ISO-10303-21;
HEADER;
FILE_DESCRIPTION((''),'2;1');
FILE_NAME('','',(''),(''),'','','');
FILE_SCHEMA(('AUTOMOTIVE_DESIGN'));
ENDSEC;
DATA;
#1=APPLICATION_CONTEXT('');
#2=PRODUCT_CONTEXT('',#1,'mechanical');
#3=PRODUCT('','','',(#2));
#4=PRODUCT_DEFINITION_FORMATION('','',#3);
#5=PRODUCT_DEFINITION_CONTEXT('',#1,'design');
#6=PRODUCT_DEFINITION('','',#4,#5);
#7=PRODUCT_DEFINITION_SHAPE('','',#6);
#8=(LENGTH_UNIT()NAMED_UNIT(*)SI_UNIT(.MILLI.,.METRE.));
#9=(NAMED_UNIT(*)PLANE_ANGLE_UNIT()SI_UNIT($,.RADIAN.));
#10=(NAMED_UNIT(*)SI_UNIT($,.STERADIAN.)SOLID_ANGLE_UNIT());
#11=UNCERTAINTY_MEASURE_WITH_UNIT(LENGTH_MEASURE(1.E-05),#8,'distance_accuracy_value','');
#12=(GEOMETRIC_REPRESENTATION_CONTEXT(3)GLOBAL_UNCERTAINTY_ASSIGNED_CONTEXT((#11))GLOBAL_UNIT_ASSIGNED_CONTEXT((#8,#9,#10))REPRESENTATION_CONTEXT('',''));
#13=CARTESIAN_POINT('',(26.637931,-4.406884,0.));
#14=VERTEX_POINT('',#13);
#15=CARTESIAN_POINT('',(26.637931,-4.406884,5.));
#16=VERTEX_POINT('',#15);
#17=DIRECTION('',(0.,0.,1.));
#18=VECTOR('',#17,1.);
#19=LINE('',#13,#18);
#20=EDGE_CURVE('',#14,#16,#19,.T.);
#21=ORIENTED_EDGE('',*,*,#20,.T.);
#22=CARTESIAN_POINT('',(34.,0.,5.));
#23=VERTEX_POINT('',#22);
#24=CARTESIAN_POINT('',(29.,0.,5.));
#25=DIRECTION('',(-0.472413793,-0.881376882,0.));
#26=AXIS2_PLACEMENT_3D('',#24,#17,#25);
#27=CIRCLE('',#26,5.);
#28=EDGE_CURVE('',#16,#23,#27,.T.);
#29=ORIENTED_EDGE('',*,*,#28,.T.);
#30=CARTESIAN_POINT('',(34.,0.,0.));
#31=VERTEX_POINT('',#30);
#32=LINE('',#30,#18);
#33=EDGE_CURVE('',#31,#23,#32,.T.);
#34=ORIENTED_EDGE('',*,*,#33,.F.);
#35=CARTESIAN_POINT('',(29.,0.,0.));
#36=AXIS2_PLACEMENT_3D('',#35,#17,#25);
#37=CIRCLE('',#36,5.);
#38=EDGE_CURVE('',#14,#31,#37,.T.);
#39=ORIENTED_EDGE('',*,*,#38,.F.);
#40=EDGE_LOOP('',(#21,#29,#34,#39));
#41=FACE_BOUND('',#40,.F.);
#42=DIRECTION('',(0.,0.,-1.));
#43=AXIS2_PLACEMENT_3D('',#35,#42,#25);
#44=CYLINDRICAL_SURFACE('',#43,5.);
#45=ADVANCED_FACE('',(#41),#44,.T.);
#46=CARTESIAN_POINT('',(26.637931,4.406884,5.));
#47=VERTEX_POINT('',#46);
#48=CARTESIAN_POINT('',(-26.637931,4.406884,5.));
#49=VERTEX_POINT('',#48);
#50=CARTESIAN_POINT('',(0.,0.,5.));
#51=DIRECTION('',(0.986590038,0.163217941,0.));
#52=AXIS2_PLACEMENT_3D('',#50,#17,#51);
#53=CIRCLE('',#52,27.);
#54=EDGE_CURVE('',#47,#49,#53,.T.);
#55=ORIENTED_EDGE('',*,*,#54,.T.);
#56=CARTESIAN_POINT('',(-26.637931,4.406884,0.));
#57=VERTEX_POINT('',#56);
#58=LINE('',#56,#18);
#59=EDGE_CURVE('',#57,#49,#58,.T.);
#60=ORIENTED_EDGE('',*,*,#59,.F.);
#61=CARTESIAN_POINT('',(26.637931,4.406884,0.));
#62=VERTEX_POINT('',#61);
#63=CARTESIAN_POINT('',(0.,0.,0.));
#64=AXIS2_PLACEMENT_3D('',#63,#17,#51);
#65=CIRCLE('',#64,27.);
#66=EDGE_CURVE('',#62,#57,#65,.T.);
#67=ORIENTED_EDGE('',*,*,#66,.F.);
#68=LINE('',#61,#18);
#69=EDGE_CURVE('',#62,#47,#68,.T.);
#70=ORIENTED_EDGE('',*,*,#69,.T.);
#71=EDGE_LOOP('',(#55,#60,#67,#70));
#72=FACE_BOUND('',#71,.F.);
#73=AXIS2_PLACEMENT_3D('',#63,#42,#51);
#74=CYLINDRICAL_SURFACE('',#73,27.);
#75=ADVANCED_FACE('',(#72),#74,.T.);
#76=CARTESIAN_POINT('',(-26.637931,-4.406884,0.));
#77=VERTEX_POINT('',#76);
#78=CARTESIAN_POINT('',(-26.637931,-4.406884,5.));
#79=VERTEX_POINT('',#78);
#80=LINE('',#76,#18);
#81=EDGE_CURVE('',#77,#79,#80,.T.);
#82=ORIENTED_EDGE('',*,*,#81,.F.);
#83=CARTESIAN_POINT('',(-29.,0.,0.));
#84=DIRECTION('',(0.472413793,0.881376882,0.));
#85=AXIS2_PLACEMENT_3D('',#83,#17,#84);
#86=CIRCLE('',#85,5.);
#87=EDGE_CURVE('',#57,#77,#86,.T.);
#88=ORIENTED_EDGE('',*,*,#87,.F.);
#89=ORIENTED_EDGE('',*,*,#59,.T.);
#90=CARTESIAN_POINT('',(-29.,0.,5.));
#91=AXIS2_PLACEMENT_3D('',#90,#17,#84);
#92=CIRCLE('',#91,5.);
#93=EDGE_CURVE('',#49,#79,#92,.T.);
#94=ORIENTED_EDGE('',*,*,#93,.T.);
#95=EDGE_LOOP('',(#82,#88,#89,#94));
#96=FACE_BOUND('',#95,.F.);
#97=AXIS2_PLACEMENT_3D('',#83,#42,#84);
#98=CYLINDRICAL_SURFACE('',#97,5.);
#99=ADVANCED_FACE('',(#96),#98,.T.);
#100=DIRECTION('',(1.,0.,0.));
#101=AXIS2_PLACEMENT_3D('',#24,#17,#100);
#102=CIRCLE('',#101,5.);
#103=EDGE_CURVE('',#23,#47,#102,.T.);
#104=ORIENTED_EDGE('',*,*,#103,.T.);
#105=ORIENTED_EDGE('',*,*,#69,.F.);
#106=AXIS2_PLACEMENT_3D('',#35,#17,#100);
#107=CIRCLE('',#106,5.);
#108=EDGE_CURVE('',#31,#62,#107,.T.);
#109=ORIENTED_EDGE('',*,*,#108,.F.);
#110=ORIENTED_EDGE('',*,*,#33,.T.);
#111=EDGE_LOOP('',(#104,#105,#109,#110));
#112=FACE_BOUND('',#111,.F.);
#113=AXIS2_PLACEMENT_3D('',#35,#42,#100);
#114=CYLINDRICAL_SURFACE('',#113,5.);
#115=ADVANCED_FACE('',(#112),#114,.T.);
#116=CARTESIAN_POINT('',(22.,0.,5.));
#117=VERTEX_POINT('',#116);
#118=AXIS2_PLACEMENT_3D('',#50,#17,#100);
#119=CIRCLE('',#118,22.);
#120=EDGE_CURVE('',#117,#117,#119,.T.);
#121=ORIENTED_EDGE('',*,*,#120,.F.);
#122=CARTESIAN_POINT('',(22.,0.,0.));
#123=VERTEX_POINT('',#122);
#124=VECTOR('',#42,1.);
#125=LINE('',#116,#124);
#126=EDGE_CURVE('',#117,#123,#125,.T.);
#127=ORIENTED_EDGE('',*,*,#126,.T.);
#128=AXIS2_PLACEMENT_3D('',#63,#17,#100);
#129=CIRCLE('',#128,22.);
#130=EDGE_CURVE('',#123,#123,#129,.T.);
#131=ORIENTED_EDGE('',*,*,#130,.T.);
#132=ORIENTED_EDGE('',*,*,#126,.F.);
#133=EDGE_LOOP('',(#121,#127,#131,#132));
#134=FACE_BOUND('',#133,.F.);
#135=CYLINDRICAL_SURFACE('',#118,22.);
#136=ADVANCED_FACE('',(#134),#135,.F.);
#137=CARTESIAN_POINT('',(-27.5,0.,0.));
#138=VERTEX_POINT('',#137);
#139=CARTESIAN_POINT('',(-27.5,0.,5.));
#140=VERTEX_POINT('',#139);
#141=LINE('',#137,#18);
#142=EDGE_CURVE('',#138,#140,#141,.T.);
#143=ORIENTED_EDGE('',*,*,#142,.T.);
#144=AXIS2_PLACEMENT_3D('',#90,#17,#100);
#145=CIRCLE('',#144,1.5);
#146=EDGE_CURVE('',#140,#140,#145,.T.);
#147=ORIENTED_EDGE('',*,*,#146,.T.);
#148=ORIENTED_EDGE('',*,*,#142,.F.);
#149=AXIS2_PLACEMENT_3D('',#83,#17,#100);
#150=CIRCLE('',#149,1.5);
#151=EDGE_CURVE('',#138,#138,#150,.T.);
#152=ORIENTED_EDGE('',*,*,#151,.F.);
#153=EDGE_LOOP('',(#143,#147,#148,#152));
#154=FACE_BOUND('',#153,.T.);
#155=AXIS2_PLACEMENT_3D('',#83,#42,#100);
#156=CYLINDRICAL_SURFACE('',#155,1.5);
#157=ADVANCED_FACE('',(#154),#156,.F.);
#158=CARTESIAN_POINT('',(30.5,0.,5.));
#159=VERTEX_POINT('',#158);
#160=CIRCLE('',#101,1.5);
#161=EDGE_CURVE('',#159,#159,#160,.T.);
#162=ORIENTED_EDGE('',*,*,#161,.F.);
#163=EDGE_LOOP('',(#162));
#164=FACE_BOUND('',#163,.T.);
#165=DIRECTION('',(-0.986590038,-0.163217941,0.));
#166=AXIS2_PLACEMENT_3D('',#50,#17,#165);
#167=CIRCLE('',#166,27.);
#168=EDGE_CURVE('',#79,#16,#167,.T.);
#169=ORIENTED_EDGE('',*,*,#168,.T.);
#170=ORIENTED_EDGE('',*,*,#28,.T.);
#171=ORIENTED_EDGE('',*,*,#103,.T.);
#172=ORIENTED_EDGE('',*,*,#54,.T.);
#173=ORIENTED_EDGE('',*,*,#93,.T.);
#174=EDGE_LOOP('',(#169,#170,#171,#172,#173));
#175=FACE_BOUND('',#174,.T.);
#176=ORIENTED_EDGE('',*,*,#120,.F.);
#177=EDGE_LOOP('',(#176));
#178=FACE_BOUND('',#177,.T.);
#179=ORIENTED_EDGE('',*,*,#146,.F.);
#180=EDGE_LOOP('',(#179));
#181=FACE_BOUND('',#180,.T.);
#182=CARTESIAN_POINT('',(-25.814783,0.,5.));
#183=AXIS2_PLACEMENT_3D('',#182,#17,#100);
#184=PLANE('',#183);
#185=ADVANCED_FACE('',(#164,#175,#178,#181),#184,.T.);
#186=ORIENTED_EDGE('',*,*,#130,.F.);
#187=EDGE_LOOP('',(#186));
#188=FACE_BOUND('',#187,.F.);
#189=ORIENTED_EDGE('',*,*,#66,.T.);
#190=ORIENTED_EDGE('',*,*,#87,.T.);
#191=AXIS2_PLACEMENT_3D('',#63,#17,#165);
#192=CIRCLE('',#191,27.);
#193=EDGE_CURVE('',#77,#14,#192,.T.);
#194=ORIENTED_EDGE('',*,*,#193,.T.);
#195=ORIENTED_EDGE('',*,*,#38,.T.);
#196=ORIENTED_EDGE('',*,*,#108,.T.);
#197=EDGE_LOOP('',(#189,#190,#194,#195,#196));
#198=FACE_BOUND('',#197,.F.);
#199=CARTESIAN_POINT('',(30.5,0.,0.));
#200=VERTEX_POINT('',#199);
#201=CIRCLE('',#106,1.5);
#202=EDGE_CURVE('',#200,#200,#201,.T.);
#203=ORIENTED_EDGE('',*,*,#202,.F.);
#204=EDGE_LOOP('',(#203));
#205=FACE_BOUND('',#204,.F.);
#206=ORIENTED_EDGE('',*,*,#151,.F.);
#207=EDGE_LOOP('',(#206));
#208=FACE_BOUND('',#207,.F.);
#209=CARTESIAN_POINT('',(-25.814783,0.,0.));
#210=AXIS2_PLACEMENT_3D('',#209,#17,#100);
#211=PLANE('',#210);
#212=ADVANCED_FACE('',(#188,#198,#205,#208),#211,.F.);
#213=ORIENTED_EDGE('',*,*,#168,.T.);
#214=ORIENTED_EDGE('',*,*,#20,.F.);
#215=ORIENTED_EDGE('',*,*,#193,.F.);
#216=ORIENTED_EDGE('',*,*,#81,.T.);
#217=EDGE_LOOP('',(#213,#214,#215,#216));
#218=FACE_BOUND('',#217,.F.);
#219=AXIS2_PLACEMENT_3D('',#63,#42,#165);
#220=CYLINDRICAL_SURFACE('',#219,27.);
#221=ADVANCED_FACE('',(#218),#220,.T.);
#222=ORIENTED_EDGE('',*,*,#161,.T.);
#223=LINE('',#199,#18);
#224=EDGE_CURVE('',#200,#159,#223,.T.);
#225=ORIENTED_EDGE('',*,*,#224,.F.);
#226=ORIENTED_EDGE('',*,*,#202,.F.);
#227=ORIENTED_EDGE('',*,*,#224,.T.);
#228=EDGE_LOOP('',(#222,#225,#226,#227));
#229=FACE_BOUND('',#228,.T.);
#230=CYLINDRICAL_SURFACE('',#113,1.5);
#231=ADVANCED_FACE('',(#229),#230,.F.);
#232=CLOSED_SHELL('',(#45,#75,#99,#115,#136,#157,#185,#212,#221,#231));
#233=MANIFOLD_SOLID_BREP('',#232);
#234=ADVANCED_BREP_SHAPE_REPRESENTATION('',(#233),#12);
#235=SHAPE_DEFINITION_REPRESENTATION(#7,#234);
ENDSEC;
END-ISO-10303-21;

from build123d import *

# Parameters (mm, degrees)
F0_R     = 1.5
F1_DEPTH = 5
F2_DEPTH = 5
F3_R     = 22
F4_DEPTH = 6


with BuildPart() as f1:
    # F0 (on Top) → F1 (new body)
    with BuildSketch(Plane.XY):
        with BuildLine():
            ThreePointArc((-26.6379310345, -4.4068844099), (-27, 0), (-26.6379310345, 4.4068844099))
            ThreePointArc((-26.6379310345, 4.4068844099), (-34, 0), (-26.6379310345, -4.4068844099))
        make_face()
        with Locations((-29, 0)):
            Circle(F0_R, mode=Mode.SUBTRACT)
    extrude(amount=F1_DEPTH)



with BuildPart() as f1b:
    # F0 (on Top) → F1, piece 2 (new body)
    with BuildSketch(Plane.XY):
        with BuildLine():
            ThreePointArc((26.6379310345, 4.4068844099), (26.9093305187, 2.21086658), (27, 0))
            ThreePointArc((27, 0), (26.9093305187, -2.21086658), (26.6379310345, -4.4068844099))
            ThreePointArc((26.6379310345, -4.4068844099), (31.5680396388, -4.2901249881), (34, 0))
            ThreePointArc((34, 0), (31.5680396388, 4.2901249881), (26.6379310345, 4.4068844099))
        make_face()
        with Locations((29, 0)):
            Circle(F0_R, mode=Mode.SUBTRACT)
    extrude(amount=F1_DEPTH)


with BuildPart() as f1_1:
    add(f1.part)

    add(f1b.part)  # F2 merges F1b
    # F0 (on Top) → F2 (join)
    with BuildSketch(Plane.XY):
        with BuildLine():
            ThreePointArc((-24, 0), (-24.7098750119, 2.5680396388), (-26.6379310345, 4.4068844099))
            ThreePointArc((-26.6379310345, 4.4068844099), (-27, 0), (-26.6379310345, -4.4068844099))
            ThreePointArc((-26.6379310345, -4.4068844099), (-24.7098750119, -2.5680396388), (-24, 0))
        make_face()
        with BuildLine():
            ThreePointArc((26.6379310345, -4.4068844099), (26.9093305187, -2.21086658), (27, 0))
            ThreePointArc((27, 0), (26.9093305187, 2.21086658), (26.6379310345, 4.4068844099))
            ThreePointArc((26.6379310345, 4.4068844099), (24, 0), (26.6379310345, -4.4068844099))
        make_face()
        with BuildLine():
            ThreePointArc((26.6379310345, -4.4068844099), (24, 0), (26.6379310345, 4.4068844099))
            ThreePointArc((26.6379310345, 4.4068844099), (0, 27), (-26.6379310345, 4.4068844099))
            ThreePointArc((-26.6379310345, 4.4068844099), (-24.7098750119, 2.5680396388), (-24, 0))
            ThreePointArc((-24, 0), (-24.7098750119, -2.5680396388), (-26.6379310345, -4.4068844099))
            ThreePointArc((-26.6379310345, -4.4068844099), (0, -27), (26.6379310345, -4.4068844099))
        make_face()
    extrude(amount=F2_DEPTH)

    # F3 (on face) → F4 (cut)
    with BuildSketch(Plane.XY.offset(5)):
        Circle(F3_R)
    extrude(amount=-F4_DEPTH, mode=Mode.SUBTRACT)


solid = f1_1.part
